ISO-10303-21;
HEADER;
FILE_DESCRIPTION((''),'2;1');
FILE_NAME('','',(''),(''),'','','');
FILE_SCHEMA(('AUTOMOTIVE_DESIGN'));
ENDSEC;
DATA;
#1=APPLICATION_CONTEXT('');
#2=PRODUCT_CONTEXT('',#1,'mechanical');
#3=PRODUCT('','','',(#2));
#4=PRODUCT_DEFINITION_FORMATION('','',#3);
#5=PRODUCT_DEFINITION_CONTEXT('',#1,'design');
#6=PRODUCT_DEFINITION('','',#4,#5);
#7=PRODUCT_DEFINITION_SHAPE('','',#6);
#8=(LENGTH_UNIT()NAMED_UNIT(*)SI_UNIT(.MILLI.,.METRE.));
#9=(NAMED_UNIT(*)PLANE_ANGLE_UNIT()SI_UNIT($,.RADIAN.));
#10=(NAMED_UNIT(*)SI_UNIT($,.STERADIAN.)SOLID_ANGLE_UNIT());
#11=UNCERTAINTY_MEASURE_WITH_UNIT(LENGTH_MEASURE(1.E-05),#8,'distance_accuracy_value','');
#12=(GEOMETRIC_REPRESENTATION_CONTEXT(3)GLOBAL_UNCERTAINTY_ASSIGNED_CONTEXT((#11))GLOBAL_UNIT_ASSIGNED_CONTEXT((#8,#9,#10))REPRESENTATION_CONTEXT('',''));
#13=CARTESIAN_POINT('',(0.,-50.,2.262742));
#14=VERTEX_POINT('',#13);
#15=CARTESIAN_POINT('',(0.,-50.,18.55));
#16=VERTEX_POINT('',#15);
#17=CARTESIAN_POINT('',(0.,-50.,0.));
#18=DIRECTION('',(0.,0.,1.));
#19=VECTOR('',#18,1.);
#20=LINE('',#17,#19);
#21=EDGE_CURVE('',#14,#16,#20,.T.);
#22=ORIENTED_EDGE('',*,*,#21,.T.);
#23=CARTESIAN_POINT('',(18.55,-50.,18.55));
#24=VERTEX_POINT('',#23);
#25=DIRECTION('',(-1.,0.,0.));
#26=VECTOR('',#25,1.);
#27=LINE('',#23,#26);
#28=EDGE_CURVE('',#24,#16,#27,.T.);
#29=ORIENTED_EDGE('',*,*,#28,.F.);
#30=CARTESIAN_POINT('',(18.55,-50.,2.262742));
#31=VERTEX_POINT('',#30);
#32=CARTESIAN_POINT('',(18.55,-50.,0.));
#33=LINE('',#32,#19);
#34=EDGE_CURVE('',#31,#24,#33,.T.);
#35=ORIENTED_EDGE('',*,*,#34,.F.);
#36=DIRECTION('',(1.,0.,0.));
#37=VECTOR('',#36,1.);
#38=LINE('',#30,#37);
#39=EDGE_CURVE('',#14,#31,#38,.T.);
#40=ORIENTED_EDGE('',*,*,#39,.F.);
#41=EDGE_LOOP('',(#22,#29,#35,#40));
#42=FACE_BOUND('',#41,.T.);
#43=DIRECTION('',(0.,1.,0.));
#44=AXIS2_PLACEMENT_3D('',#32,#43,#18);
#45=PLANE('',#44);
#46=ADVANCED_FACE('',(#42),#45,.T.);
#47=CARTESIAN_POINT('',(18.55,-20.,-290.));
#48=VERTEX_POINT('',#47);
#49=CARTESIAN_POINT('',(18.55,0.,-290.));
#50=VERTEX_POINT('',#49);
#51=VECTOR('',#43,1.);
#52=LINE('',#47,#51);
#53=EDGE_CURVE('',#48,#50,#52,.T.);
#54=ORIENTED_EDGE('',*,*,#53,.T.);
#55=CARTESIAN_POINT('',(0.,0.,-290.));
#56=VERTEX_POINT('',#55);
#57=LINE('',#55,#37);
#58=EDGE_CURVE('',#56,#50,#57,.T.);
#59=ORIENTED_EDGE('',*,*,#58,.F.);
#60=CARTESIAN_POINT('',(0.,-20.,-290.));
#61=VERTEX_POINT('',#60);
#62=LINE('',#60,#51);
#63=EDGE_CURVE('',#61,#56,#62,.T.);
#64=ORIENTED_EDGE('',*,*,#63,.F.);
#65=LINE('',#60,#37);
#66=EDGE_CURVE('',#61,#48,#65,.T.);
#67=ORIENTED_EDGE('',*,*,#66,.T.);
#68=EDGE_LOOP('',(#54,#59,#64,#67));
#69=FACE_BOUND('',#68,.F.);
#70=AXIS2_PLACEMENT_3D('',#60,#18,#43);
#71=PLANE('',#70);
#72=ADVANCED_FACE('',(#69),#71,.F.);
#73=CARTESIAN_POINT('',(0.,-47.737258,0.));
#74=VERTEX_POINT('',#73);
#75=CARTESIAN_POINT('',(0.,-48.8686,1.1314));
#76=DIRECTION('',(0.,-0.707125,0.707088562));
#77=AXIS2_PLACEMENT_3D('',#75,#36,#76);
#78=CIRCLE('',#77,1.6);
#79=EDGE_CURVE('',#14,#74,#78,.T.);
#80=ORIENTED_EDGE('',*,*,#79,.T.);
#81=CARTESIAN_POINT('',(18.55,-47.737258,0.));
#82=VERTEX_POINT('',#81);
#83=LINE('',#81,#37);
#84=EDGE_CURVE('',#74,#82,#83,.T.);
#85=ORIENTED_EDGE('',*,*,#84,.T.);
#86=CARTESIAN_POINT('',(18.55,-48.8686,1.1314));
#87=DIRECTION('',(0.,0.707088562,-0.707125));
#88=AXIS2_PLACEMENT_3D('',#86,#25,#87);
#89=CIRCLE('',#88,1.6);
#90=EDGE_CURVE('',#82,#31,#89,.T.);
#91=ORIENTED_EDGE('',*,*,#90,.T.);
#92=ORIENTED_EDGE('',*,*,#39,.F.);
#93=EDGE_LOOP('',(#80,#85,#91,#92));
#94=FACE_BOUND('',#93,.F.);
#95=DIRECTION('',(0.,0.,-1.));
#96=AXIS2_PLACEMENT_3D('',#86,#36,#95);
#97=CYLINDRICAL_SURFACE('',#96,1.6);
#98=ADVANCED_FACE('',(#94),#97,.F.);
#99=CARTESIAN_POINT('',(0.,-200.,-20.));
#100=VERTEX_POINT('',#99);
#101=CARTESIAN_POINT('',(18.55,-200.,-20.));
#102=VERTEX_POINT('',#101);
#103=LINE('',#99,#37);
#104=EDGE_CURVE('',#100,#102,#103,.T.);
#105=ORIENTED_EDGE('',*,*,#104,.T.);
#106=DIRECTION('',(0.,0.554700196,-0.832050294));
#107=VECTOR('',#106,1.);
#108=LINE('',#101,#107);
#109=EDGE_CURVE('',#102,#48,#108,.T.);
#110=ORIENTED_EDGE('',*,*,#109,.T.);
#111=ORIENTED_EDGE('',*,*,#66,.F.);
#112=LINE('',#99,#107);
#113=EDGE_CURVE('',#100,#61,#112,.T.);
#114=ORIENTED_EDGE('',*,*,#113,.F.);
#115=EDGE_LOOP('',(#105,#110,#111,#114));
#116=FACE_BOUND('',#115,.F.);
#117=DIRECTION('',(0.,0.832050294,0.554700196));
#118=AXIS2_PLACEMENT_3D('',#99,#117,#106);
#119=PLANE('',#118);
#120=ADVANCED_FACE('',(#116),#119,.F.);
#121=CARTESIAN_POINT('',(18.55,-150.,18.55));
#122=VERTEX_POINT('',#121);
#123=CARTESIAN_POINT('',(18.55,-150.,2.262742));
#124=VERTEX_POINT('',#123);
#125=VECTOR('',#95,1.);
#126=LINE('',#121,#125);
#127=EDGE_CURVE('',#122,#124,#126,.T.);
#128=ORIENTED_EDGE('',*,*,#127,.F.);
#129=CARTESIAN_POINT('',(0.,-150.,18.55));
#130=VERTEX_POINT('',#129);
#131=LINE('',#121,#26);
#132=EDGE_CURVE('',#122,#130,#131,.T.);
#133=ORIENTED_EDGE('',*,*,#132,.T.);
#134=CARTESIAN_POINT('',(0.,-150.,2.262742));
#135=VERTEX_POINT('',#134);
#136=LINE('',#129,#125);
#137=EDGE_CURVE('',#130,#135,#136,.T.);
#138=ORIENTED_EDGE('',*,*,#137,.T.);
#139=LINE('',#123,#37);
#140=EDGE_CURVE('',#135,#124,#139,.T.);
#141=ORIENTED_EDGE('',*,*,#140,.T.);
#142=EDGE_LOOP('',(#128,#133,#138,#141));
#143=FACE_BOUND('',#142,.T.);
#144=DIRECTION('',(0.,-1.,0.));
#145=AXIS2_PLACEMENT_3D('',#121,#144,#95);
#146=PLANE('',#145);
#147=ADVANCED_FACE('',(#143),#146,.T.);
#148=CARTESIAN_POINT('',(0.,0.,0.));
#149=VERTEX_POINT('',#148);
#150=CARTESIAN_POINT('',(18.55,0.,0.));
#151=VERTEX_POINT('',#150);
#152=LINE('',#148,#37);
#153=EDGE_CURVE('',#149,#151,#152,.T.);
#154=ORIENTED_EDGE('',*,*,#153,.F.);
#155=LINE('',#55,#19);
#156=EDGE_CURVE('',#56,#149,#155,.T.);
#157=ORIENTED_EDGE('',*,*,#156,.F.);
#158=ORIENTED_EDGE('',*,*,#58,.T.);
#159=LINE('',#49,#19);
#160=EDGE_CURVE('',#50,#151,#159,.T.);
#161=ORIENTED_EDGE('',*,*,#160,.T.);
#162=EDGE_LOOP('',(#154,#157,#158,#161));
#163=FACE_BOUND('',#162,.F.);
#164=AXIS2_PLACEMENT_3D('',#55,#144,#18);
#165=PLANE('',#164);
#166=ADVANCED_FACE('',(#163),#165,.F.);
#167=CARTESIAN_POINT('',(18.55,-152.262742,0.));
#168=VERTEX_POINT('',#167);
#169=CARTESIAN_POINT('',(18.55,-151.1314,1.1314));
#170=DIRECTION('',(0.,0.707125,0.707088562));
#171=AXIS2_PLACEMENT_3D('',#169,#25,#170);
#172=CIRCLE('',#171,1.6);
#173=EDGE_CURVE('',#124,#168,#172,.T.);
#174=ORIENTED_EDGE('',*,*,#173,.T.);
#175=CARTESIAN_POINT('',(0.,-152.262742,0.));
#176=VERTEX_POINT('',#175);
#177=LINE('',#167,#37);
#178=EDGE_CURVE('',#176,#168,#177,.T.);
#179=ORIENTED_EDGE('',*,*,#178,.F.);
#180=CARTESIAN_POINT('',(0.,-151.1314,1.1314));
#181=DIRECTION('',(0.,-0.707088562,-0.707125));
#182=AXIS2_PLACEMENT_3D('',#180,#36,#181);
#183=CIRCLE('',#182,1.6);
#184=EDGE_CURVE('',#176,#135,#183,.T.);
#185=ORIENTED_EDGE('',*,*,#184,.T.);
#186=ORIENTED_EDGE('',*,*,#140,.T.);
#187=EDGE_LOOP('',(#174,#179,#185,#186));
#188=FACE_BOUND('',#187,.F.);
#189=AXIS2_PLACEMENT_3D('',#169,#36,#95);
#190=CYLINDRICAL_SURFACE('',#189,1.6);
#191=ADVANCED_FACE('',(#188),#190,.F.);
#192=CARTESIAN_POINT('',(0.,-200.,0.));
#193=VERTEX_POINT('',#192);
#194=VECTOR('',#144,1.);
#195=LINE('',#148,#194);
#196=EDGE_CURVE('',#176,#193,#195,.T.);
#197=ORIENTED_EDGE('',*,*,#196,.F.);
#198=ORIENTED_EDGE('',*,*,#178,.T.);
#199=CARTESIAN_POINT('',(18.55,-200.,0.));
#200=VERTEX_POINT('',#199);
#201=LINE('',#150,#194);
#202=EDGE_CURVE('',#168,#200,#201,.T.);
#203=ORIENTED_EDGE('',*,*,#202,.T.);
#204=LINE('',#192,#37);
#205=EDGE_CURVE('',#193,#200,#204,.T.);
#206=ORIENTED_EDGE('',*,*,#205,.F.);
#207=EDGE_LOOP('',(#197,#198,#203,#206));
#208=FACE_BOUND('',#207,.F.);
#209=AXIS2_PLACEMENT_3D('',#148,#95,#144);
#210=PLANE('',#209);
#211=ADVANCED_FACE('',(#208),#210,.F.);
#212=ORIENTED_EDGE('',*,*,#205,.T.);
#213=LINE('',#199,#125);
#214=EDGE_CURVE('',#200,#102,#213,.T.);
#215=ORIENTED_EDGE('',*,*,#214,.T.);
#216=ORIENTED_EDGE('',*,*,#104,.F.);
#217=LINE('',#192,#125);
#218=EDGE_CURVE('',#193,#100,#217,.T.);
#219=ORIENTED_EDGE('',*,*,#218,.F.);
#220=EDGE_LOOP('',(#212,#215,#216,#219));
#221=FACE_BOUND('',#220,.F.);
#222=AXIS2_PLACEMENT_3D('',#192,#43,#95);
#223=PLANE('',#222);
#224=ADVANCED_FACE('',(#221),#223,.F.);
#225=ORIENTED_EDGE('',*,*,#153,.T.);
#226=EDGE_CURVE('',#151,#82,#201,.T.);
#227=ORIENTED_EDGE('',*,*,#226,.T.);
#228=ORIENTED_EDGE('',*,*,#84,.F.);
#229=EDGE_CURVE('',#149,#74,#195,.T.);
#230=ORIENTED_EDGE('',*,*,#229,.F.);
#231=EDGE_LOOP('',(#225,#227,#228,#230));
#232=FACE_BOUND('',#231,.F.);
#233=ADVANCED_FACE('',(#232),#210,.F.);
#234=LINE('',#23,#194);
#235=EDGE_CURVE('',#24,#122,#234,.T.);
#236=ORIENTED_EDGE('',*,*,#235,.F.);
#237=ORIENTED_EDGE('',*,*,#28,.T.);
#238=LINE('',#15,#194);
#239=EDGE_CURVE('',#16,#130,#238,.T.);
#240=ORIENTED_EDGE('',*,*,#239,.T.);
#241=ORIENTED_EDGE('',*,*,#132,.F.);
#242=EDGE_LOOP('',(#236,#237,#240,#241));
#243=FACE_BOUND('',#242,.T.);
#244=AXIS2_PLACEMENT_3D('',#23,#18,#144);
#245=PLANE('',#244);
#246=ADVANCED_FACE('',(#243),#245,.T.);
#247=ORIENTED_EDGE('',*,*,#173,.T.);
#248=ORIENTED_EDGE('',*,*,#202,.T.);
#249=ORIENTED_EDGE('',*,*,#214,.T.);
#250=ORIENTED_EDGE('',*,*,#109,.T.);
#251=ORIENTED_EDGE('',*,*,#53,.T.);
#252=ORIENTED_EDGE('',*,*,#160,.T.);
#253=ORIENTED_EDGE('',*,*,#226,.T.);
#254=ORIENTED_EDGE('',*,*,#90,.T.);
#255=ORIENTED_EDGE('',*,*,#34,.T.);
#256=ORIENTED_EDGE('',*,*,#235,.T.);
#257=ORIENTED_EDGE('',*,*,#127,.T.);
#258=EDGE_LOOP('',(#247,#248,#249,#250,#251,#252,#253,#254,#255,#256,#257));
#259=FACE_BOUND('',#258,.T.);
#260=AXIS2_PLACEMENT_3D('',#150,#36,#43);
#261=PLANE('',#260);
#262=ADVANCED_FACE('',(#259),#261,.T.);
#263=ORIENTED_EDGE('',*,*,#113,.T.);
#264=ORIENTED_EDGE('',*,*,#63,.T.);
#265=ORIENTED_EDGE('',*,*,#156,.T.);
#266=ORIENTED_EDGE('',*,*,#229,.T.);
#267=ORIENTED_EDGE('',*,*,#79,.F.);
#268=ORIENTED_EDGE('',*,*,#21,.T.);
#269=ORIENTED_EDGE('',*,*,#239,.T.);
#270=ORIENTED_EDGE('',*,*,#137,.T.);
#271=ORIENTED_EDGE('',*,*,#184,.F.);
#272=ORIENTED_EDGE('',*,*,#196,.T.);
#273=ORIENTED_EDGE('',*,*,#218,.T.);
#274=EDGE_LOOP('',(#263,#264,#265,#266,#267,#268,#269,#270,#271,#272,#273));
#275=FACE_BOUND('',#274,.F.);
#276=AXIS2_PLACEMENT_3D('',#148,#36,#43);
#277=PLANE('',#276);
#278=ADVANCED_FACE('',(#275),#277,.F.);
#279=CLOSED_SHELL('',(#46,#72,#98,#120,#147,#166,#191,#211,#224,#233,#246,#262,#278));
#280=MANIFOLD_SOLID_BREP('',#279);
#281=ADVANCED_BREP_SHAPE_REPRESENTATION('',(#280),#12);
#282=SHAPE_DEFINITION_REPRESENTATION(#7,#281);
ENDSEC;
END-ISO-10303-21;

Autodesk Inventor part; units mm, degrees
ref_plane "YZ Plane" through (0, 0, 0) normal (1, 0, 0) x (0, 1, 0)
ref_plane "XZ Plane" through (0, 0, 0) normal (0, 1, 0) x (-1, 0, 0)
ref_plane "XY Plane" through (0, 0, 0) normal (0, 0, 1) x (1, 0, 0)
sketch "Esquisse1" plane through (0, 0, 0) normal (1, 0, 0) x (0, 1, 0)
  line L0 (0, 0) -> (-200, 0)
  line L1 (-200, 0) -> (-200, -20)
  line L2 (-200, -20) -> (-20, -290)
  line L3 (-20, -290) -> (0, -290)
  line L4 (0, -290) -> (0, 0)
  dimension "d0" = 200
  dimension "d1" = 20
  dimension "d2" = 20
  dimension "d3" = 290
extrude "Extrusion1" add sketch "Esquisse1" along normal blind 18.55
sketch "Esquisse2" plane through (18.55, 0, 0) normal (1, 0, 0) x (0, 0, -1)
  line L0 (0, 0) -> (0, -200) projected
  line L1 (0, -50) -> (-18.55, -50)
  line L2 (-18.55, -50) -> (-18.55, -150)
  line L3 (-18.55, -150) -> (0, -150)
  line L4 (0, -150) -> (0, -50)
  line L5 (290, 0) -> (0, 0) projected
  point P0 (0, -150)
  dimension "d6" = 18.55
  dimension "d7" = 50
  dimension "d8" = 100
extrude "Extrusion2" add sketch "Esquisse2" against normal blind 18.55
sketch "Esquisse3" plane through (18.55, 0, 0) normal (1, 0, 0) x (0, 0, -1)
  circle A0 centre (-1.1314, -48.8686) radius 1.6
  line L0 (-1.1314, -48.8686) -> (0, -50) construction
  line L1 (0, -50) -> (-18.55, -50) projected
  circle A1 centre (-1.1314, -151.1314) radius 1.6
  point P0 (0, 0)
  point P1 (0, -150)
  dimension "d12" = 3.2
  dimension "d11" = 45
extrude "Extrusion3" cut sketch "Esquisse3" against normal blind 18.55
properties part number "Bracket"
